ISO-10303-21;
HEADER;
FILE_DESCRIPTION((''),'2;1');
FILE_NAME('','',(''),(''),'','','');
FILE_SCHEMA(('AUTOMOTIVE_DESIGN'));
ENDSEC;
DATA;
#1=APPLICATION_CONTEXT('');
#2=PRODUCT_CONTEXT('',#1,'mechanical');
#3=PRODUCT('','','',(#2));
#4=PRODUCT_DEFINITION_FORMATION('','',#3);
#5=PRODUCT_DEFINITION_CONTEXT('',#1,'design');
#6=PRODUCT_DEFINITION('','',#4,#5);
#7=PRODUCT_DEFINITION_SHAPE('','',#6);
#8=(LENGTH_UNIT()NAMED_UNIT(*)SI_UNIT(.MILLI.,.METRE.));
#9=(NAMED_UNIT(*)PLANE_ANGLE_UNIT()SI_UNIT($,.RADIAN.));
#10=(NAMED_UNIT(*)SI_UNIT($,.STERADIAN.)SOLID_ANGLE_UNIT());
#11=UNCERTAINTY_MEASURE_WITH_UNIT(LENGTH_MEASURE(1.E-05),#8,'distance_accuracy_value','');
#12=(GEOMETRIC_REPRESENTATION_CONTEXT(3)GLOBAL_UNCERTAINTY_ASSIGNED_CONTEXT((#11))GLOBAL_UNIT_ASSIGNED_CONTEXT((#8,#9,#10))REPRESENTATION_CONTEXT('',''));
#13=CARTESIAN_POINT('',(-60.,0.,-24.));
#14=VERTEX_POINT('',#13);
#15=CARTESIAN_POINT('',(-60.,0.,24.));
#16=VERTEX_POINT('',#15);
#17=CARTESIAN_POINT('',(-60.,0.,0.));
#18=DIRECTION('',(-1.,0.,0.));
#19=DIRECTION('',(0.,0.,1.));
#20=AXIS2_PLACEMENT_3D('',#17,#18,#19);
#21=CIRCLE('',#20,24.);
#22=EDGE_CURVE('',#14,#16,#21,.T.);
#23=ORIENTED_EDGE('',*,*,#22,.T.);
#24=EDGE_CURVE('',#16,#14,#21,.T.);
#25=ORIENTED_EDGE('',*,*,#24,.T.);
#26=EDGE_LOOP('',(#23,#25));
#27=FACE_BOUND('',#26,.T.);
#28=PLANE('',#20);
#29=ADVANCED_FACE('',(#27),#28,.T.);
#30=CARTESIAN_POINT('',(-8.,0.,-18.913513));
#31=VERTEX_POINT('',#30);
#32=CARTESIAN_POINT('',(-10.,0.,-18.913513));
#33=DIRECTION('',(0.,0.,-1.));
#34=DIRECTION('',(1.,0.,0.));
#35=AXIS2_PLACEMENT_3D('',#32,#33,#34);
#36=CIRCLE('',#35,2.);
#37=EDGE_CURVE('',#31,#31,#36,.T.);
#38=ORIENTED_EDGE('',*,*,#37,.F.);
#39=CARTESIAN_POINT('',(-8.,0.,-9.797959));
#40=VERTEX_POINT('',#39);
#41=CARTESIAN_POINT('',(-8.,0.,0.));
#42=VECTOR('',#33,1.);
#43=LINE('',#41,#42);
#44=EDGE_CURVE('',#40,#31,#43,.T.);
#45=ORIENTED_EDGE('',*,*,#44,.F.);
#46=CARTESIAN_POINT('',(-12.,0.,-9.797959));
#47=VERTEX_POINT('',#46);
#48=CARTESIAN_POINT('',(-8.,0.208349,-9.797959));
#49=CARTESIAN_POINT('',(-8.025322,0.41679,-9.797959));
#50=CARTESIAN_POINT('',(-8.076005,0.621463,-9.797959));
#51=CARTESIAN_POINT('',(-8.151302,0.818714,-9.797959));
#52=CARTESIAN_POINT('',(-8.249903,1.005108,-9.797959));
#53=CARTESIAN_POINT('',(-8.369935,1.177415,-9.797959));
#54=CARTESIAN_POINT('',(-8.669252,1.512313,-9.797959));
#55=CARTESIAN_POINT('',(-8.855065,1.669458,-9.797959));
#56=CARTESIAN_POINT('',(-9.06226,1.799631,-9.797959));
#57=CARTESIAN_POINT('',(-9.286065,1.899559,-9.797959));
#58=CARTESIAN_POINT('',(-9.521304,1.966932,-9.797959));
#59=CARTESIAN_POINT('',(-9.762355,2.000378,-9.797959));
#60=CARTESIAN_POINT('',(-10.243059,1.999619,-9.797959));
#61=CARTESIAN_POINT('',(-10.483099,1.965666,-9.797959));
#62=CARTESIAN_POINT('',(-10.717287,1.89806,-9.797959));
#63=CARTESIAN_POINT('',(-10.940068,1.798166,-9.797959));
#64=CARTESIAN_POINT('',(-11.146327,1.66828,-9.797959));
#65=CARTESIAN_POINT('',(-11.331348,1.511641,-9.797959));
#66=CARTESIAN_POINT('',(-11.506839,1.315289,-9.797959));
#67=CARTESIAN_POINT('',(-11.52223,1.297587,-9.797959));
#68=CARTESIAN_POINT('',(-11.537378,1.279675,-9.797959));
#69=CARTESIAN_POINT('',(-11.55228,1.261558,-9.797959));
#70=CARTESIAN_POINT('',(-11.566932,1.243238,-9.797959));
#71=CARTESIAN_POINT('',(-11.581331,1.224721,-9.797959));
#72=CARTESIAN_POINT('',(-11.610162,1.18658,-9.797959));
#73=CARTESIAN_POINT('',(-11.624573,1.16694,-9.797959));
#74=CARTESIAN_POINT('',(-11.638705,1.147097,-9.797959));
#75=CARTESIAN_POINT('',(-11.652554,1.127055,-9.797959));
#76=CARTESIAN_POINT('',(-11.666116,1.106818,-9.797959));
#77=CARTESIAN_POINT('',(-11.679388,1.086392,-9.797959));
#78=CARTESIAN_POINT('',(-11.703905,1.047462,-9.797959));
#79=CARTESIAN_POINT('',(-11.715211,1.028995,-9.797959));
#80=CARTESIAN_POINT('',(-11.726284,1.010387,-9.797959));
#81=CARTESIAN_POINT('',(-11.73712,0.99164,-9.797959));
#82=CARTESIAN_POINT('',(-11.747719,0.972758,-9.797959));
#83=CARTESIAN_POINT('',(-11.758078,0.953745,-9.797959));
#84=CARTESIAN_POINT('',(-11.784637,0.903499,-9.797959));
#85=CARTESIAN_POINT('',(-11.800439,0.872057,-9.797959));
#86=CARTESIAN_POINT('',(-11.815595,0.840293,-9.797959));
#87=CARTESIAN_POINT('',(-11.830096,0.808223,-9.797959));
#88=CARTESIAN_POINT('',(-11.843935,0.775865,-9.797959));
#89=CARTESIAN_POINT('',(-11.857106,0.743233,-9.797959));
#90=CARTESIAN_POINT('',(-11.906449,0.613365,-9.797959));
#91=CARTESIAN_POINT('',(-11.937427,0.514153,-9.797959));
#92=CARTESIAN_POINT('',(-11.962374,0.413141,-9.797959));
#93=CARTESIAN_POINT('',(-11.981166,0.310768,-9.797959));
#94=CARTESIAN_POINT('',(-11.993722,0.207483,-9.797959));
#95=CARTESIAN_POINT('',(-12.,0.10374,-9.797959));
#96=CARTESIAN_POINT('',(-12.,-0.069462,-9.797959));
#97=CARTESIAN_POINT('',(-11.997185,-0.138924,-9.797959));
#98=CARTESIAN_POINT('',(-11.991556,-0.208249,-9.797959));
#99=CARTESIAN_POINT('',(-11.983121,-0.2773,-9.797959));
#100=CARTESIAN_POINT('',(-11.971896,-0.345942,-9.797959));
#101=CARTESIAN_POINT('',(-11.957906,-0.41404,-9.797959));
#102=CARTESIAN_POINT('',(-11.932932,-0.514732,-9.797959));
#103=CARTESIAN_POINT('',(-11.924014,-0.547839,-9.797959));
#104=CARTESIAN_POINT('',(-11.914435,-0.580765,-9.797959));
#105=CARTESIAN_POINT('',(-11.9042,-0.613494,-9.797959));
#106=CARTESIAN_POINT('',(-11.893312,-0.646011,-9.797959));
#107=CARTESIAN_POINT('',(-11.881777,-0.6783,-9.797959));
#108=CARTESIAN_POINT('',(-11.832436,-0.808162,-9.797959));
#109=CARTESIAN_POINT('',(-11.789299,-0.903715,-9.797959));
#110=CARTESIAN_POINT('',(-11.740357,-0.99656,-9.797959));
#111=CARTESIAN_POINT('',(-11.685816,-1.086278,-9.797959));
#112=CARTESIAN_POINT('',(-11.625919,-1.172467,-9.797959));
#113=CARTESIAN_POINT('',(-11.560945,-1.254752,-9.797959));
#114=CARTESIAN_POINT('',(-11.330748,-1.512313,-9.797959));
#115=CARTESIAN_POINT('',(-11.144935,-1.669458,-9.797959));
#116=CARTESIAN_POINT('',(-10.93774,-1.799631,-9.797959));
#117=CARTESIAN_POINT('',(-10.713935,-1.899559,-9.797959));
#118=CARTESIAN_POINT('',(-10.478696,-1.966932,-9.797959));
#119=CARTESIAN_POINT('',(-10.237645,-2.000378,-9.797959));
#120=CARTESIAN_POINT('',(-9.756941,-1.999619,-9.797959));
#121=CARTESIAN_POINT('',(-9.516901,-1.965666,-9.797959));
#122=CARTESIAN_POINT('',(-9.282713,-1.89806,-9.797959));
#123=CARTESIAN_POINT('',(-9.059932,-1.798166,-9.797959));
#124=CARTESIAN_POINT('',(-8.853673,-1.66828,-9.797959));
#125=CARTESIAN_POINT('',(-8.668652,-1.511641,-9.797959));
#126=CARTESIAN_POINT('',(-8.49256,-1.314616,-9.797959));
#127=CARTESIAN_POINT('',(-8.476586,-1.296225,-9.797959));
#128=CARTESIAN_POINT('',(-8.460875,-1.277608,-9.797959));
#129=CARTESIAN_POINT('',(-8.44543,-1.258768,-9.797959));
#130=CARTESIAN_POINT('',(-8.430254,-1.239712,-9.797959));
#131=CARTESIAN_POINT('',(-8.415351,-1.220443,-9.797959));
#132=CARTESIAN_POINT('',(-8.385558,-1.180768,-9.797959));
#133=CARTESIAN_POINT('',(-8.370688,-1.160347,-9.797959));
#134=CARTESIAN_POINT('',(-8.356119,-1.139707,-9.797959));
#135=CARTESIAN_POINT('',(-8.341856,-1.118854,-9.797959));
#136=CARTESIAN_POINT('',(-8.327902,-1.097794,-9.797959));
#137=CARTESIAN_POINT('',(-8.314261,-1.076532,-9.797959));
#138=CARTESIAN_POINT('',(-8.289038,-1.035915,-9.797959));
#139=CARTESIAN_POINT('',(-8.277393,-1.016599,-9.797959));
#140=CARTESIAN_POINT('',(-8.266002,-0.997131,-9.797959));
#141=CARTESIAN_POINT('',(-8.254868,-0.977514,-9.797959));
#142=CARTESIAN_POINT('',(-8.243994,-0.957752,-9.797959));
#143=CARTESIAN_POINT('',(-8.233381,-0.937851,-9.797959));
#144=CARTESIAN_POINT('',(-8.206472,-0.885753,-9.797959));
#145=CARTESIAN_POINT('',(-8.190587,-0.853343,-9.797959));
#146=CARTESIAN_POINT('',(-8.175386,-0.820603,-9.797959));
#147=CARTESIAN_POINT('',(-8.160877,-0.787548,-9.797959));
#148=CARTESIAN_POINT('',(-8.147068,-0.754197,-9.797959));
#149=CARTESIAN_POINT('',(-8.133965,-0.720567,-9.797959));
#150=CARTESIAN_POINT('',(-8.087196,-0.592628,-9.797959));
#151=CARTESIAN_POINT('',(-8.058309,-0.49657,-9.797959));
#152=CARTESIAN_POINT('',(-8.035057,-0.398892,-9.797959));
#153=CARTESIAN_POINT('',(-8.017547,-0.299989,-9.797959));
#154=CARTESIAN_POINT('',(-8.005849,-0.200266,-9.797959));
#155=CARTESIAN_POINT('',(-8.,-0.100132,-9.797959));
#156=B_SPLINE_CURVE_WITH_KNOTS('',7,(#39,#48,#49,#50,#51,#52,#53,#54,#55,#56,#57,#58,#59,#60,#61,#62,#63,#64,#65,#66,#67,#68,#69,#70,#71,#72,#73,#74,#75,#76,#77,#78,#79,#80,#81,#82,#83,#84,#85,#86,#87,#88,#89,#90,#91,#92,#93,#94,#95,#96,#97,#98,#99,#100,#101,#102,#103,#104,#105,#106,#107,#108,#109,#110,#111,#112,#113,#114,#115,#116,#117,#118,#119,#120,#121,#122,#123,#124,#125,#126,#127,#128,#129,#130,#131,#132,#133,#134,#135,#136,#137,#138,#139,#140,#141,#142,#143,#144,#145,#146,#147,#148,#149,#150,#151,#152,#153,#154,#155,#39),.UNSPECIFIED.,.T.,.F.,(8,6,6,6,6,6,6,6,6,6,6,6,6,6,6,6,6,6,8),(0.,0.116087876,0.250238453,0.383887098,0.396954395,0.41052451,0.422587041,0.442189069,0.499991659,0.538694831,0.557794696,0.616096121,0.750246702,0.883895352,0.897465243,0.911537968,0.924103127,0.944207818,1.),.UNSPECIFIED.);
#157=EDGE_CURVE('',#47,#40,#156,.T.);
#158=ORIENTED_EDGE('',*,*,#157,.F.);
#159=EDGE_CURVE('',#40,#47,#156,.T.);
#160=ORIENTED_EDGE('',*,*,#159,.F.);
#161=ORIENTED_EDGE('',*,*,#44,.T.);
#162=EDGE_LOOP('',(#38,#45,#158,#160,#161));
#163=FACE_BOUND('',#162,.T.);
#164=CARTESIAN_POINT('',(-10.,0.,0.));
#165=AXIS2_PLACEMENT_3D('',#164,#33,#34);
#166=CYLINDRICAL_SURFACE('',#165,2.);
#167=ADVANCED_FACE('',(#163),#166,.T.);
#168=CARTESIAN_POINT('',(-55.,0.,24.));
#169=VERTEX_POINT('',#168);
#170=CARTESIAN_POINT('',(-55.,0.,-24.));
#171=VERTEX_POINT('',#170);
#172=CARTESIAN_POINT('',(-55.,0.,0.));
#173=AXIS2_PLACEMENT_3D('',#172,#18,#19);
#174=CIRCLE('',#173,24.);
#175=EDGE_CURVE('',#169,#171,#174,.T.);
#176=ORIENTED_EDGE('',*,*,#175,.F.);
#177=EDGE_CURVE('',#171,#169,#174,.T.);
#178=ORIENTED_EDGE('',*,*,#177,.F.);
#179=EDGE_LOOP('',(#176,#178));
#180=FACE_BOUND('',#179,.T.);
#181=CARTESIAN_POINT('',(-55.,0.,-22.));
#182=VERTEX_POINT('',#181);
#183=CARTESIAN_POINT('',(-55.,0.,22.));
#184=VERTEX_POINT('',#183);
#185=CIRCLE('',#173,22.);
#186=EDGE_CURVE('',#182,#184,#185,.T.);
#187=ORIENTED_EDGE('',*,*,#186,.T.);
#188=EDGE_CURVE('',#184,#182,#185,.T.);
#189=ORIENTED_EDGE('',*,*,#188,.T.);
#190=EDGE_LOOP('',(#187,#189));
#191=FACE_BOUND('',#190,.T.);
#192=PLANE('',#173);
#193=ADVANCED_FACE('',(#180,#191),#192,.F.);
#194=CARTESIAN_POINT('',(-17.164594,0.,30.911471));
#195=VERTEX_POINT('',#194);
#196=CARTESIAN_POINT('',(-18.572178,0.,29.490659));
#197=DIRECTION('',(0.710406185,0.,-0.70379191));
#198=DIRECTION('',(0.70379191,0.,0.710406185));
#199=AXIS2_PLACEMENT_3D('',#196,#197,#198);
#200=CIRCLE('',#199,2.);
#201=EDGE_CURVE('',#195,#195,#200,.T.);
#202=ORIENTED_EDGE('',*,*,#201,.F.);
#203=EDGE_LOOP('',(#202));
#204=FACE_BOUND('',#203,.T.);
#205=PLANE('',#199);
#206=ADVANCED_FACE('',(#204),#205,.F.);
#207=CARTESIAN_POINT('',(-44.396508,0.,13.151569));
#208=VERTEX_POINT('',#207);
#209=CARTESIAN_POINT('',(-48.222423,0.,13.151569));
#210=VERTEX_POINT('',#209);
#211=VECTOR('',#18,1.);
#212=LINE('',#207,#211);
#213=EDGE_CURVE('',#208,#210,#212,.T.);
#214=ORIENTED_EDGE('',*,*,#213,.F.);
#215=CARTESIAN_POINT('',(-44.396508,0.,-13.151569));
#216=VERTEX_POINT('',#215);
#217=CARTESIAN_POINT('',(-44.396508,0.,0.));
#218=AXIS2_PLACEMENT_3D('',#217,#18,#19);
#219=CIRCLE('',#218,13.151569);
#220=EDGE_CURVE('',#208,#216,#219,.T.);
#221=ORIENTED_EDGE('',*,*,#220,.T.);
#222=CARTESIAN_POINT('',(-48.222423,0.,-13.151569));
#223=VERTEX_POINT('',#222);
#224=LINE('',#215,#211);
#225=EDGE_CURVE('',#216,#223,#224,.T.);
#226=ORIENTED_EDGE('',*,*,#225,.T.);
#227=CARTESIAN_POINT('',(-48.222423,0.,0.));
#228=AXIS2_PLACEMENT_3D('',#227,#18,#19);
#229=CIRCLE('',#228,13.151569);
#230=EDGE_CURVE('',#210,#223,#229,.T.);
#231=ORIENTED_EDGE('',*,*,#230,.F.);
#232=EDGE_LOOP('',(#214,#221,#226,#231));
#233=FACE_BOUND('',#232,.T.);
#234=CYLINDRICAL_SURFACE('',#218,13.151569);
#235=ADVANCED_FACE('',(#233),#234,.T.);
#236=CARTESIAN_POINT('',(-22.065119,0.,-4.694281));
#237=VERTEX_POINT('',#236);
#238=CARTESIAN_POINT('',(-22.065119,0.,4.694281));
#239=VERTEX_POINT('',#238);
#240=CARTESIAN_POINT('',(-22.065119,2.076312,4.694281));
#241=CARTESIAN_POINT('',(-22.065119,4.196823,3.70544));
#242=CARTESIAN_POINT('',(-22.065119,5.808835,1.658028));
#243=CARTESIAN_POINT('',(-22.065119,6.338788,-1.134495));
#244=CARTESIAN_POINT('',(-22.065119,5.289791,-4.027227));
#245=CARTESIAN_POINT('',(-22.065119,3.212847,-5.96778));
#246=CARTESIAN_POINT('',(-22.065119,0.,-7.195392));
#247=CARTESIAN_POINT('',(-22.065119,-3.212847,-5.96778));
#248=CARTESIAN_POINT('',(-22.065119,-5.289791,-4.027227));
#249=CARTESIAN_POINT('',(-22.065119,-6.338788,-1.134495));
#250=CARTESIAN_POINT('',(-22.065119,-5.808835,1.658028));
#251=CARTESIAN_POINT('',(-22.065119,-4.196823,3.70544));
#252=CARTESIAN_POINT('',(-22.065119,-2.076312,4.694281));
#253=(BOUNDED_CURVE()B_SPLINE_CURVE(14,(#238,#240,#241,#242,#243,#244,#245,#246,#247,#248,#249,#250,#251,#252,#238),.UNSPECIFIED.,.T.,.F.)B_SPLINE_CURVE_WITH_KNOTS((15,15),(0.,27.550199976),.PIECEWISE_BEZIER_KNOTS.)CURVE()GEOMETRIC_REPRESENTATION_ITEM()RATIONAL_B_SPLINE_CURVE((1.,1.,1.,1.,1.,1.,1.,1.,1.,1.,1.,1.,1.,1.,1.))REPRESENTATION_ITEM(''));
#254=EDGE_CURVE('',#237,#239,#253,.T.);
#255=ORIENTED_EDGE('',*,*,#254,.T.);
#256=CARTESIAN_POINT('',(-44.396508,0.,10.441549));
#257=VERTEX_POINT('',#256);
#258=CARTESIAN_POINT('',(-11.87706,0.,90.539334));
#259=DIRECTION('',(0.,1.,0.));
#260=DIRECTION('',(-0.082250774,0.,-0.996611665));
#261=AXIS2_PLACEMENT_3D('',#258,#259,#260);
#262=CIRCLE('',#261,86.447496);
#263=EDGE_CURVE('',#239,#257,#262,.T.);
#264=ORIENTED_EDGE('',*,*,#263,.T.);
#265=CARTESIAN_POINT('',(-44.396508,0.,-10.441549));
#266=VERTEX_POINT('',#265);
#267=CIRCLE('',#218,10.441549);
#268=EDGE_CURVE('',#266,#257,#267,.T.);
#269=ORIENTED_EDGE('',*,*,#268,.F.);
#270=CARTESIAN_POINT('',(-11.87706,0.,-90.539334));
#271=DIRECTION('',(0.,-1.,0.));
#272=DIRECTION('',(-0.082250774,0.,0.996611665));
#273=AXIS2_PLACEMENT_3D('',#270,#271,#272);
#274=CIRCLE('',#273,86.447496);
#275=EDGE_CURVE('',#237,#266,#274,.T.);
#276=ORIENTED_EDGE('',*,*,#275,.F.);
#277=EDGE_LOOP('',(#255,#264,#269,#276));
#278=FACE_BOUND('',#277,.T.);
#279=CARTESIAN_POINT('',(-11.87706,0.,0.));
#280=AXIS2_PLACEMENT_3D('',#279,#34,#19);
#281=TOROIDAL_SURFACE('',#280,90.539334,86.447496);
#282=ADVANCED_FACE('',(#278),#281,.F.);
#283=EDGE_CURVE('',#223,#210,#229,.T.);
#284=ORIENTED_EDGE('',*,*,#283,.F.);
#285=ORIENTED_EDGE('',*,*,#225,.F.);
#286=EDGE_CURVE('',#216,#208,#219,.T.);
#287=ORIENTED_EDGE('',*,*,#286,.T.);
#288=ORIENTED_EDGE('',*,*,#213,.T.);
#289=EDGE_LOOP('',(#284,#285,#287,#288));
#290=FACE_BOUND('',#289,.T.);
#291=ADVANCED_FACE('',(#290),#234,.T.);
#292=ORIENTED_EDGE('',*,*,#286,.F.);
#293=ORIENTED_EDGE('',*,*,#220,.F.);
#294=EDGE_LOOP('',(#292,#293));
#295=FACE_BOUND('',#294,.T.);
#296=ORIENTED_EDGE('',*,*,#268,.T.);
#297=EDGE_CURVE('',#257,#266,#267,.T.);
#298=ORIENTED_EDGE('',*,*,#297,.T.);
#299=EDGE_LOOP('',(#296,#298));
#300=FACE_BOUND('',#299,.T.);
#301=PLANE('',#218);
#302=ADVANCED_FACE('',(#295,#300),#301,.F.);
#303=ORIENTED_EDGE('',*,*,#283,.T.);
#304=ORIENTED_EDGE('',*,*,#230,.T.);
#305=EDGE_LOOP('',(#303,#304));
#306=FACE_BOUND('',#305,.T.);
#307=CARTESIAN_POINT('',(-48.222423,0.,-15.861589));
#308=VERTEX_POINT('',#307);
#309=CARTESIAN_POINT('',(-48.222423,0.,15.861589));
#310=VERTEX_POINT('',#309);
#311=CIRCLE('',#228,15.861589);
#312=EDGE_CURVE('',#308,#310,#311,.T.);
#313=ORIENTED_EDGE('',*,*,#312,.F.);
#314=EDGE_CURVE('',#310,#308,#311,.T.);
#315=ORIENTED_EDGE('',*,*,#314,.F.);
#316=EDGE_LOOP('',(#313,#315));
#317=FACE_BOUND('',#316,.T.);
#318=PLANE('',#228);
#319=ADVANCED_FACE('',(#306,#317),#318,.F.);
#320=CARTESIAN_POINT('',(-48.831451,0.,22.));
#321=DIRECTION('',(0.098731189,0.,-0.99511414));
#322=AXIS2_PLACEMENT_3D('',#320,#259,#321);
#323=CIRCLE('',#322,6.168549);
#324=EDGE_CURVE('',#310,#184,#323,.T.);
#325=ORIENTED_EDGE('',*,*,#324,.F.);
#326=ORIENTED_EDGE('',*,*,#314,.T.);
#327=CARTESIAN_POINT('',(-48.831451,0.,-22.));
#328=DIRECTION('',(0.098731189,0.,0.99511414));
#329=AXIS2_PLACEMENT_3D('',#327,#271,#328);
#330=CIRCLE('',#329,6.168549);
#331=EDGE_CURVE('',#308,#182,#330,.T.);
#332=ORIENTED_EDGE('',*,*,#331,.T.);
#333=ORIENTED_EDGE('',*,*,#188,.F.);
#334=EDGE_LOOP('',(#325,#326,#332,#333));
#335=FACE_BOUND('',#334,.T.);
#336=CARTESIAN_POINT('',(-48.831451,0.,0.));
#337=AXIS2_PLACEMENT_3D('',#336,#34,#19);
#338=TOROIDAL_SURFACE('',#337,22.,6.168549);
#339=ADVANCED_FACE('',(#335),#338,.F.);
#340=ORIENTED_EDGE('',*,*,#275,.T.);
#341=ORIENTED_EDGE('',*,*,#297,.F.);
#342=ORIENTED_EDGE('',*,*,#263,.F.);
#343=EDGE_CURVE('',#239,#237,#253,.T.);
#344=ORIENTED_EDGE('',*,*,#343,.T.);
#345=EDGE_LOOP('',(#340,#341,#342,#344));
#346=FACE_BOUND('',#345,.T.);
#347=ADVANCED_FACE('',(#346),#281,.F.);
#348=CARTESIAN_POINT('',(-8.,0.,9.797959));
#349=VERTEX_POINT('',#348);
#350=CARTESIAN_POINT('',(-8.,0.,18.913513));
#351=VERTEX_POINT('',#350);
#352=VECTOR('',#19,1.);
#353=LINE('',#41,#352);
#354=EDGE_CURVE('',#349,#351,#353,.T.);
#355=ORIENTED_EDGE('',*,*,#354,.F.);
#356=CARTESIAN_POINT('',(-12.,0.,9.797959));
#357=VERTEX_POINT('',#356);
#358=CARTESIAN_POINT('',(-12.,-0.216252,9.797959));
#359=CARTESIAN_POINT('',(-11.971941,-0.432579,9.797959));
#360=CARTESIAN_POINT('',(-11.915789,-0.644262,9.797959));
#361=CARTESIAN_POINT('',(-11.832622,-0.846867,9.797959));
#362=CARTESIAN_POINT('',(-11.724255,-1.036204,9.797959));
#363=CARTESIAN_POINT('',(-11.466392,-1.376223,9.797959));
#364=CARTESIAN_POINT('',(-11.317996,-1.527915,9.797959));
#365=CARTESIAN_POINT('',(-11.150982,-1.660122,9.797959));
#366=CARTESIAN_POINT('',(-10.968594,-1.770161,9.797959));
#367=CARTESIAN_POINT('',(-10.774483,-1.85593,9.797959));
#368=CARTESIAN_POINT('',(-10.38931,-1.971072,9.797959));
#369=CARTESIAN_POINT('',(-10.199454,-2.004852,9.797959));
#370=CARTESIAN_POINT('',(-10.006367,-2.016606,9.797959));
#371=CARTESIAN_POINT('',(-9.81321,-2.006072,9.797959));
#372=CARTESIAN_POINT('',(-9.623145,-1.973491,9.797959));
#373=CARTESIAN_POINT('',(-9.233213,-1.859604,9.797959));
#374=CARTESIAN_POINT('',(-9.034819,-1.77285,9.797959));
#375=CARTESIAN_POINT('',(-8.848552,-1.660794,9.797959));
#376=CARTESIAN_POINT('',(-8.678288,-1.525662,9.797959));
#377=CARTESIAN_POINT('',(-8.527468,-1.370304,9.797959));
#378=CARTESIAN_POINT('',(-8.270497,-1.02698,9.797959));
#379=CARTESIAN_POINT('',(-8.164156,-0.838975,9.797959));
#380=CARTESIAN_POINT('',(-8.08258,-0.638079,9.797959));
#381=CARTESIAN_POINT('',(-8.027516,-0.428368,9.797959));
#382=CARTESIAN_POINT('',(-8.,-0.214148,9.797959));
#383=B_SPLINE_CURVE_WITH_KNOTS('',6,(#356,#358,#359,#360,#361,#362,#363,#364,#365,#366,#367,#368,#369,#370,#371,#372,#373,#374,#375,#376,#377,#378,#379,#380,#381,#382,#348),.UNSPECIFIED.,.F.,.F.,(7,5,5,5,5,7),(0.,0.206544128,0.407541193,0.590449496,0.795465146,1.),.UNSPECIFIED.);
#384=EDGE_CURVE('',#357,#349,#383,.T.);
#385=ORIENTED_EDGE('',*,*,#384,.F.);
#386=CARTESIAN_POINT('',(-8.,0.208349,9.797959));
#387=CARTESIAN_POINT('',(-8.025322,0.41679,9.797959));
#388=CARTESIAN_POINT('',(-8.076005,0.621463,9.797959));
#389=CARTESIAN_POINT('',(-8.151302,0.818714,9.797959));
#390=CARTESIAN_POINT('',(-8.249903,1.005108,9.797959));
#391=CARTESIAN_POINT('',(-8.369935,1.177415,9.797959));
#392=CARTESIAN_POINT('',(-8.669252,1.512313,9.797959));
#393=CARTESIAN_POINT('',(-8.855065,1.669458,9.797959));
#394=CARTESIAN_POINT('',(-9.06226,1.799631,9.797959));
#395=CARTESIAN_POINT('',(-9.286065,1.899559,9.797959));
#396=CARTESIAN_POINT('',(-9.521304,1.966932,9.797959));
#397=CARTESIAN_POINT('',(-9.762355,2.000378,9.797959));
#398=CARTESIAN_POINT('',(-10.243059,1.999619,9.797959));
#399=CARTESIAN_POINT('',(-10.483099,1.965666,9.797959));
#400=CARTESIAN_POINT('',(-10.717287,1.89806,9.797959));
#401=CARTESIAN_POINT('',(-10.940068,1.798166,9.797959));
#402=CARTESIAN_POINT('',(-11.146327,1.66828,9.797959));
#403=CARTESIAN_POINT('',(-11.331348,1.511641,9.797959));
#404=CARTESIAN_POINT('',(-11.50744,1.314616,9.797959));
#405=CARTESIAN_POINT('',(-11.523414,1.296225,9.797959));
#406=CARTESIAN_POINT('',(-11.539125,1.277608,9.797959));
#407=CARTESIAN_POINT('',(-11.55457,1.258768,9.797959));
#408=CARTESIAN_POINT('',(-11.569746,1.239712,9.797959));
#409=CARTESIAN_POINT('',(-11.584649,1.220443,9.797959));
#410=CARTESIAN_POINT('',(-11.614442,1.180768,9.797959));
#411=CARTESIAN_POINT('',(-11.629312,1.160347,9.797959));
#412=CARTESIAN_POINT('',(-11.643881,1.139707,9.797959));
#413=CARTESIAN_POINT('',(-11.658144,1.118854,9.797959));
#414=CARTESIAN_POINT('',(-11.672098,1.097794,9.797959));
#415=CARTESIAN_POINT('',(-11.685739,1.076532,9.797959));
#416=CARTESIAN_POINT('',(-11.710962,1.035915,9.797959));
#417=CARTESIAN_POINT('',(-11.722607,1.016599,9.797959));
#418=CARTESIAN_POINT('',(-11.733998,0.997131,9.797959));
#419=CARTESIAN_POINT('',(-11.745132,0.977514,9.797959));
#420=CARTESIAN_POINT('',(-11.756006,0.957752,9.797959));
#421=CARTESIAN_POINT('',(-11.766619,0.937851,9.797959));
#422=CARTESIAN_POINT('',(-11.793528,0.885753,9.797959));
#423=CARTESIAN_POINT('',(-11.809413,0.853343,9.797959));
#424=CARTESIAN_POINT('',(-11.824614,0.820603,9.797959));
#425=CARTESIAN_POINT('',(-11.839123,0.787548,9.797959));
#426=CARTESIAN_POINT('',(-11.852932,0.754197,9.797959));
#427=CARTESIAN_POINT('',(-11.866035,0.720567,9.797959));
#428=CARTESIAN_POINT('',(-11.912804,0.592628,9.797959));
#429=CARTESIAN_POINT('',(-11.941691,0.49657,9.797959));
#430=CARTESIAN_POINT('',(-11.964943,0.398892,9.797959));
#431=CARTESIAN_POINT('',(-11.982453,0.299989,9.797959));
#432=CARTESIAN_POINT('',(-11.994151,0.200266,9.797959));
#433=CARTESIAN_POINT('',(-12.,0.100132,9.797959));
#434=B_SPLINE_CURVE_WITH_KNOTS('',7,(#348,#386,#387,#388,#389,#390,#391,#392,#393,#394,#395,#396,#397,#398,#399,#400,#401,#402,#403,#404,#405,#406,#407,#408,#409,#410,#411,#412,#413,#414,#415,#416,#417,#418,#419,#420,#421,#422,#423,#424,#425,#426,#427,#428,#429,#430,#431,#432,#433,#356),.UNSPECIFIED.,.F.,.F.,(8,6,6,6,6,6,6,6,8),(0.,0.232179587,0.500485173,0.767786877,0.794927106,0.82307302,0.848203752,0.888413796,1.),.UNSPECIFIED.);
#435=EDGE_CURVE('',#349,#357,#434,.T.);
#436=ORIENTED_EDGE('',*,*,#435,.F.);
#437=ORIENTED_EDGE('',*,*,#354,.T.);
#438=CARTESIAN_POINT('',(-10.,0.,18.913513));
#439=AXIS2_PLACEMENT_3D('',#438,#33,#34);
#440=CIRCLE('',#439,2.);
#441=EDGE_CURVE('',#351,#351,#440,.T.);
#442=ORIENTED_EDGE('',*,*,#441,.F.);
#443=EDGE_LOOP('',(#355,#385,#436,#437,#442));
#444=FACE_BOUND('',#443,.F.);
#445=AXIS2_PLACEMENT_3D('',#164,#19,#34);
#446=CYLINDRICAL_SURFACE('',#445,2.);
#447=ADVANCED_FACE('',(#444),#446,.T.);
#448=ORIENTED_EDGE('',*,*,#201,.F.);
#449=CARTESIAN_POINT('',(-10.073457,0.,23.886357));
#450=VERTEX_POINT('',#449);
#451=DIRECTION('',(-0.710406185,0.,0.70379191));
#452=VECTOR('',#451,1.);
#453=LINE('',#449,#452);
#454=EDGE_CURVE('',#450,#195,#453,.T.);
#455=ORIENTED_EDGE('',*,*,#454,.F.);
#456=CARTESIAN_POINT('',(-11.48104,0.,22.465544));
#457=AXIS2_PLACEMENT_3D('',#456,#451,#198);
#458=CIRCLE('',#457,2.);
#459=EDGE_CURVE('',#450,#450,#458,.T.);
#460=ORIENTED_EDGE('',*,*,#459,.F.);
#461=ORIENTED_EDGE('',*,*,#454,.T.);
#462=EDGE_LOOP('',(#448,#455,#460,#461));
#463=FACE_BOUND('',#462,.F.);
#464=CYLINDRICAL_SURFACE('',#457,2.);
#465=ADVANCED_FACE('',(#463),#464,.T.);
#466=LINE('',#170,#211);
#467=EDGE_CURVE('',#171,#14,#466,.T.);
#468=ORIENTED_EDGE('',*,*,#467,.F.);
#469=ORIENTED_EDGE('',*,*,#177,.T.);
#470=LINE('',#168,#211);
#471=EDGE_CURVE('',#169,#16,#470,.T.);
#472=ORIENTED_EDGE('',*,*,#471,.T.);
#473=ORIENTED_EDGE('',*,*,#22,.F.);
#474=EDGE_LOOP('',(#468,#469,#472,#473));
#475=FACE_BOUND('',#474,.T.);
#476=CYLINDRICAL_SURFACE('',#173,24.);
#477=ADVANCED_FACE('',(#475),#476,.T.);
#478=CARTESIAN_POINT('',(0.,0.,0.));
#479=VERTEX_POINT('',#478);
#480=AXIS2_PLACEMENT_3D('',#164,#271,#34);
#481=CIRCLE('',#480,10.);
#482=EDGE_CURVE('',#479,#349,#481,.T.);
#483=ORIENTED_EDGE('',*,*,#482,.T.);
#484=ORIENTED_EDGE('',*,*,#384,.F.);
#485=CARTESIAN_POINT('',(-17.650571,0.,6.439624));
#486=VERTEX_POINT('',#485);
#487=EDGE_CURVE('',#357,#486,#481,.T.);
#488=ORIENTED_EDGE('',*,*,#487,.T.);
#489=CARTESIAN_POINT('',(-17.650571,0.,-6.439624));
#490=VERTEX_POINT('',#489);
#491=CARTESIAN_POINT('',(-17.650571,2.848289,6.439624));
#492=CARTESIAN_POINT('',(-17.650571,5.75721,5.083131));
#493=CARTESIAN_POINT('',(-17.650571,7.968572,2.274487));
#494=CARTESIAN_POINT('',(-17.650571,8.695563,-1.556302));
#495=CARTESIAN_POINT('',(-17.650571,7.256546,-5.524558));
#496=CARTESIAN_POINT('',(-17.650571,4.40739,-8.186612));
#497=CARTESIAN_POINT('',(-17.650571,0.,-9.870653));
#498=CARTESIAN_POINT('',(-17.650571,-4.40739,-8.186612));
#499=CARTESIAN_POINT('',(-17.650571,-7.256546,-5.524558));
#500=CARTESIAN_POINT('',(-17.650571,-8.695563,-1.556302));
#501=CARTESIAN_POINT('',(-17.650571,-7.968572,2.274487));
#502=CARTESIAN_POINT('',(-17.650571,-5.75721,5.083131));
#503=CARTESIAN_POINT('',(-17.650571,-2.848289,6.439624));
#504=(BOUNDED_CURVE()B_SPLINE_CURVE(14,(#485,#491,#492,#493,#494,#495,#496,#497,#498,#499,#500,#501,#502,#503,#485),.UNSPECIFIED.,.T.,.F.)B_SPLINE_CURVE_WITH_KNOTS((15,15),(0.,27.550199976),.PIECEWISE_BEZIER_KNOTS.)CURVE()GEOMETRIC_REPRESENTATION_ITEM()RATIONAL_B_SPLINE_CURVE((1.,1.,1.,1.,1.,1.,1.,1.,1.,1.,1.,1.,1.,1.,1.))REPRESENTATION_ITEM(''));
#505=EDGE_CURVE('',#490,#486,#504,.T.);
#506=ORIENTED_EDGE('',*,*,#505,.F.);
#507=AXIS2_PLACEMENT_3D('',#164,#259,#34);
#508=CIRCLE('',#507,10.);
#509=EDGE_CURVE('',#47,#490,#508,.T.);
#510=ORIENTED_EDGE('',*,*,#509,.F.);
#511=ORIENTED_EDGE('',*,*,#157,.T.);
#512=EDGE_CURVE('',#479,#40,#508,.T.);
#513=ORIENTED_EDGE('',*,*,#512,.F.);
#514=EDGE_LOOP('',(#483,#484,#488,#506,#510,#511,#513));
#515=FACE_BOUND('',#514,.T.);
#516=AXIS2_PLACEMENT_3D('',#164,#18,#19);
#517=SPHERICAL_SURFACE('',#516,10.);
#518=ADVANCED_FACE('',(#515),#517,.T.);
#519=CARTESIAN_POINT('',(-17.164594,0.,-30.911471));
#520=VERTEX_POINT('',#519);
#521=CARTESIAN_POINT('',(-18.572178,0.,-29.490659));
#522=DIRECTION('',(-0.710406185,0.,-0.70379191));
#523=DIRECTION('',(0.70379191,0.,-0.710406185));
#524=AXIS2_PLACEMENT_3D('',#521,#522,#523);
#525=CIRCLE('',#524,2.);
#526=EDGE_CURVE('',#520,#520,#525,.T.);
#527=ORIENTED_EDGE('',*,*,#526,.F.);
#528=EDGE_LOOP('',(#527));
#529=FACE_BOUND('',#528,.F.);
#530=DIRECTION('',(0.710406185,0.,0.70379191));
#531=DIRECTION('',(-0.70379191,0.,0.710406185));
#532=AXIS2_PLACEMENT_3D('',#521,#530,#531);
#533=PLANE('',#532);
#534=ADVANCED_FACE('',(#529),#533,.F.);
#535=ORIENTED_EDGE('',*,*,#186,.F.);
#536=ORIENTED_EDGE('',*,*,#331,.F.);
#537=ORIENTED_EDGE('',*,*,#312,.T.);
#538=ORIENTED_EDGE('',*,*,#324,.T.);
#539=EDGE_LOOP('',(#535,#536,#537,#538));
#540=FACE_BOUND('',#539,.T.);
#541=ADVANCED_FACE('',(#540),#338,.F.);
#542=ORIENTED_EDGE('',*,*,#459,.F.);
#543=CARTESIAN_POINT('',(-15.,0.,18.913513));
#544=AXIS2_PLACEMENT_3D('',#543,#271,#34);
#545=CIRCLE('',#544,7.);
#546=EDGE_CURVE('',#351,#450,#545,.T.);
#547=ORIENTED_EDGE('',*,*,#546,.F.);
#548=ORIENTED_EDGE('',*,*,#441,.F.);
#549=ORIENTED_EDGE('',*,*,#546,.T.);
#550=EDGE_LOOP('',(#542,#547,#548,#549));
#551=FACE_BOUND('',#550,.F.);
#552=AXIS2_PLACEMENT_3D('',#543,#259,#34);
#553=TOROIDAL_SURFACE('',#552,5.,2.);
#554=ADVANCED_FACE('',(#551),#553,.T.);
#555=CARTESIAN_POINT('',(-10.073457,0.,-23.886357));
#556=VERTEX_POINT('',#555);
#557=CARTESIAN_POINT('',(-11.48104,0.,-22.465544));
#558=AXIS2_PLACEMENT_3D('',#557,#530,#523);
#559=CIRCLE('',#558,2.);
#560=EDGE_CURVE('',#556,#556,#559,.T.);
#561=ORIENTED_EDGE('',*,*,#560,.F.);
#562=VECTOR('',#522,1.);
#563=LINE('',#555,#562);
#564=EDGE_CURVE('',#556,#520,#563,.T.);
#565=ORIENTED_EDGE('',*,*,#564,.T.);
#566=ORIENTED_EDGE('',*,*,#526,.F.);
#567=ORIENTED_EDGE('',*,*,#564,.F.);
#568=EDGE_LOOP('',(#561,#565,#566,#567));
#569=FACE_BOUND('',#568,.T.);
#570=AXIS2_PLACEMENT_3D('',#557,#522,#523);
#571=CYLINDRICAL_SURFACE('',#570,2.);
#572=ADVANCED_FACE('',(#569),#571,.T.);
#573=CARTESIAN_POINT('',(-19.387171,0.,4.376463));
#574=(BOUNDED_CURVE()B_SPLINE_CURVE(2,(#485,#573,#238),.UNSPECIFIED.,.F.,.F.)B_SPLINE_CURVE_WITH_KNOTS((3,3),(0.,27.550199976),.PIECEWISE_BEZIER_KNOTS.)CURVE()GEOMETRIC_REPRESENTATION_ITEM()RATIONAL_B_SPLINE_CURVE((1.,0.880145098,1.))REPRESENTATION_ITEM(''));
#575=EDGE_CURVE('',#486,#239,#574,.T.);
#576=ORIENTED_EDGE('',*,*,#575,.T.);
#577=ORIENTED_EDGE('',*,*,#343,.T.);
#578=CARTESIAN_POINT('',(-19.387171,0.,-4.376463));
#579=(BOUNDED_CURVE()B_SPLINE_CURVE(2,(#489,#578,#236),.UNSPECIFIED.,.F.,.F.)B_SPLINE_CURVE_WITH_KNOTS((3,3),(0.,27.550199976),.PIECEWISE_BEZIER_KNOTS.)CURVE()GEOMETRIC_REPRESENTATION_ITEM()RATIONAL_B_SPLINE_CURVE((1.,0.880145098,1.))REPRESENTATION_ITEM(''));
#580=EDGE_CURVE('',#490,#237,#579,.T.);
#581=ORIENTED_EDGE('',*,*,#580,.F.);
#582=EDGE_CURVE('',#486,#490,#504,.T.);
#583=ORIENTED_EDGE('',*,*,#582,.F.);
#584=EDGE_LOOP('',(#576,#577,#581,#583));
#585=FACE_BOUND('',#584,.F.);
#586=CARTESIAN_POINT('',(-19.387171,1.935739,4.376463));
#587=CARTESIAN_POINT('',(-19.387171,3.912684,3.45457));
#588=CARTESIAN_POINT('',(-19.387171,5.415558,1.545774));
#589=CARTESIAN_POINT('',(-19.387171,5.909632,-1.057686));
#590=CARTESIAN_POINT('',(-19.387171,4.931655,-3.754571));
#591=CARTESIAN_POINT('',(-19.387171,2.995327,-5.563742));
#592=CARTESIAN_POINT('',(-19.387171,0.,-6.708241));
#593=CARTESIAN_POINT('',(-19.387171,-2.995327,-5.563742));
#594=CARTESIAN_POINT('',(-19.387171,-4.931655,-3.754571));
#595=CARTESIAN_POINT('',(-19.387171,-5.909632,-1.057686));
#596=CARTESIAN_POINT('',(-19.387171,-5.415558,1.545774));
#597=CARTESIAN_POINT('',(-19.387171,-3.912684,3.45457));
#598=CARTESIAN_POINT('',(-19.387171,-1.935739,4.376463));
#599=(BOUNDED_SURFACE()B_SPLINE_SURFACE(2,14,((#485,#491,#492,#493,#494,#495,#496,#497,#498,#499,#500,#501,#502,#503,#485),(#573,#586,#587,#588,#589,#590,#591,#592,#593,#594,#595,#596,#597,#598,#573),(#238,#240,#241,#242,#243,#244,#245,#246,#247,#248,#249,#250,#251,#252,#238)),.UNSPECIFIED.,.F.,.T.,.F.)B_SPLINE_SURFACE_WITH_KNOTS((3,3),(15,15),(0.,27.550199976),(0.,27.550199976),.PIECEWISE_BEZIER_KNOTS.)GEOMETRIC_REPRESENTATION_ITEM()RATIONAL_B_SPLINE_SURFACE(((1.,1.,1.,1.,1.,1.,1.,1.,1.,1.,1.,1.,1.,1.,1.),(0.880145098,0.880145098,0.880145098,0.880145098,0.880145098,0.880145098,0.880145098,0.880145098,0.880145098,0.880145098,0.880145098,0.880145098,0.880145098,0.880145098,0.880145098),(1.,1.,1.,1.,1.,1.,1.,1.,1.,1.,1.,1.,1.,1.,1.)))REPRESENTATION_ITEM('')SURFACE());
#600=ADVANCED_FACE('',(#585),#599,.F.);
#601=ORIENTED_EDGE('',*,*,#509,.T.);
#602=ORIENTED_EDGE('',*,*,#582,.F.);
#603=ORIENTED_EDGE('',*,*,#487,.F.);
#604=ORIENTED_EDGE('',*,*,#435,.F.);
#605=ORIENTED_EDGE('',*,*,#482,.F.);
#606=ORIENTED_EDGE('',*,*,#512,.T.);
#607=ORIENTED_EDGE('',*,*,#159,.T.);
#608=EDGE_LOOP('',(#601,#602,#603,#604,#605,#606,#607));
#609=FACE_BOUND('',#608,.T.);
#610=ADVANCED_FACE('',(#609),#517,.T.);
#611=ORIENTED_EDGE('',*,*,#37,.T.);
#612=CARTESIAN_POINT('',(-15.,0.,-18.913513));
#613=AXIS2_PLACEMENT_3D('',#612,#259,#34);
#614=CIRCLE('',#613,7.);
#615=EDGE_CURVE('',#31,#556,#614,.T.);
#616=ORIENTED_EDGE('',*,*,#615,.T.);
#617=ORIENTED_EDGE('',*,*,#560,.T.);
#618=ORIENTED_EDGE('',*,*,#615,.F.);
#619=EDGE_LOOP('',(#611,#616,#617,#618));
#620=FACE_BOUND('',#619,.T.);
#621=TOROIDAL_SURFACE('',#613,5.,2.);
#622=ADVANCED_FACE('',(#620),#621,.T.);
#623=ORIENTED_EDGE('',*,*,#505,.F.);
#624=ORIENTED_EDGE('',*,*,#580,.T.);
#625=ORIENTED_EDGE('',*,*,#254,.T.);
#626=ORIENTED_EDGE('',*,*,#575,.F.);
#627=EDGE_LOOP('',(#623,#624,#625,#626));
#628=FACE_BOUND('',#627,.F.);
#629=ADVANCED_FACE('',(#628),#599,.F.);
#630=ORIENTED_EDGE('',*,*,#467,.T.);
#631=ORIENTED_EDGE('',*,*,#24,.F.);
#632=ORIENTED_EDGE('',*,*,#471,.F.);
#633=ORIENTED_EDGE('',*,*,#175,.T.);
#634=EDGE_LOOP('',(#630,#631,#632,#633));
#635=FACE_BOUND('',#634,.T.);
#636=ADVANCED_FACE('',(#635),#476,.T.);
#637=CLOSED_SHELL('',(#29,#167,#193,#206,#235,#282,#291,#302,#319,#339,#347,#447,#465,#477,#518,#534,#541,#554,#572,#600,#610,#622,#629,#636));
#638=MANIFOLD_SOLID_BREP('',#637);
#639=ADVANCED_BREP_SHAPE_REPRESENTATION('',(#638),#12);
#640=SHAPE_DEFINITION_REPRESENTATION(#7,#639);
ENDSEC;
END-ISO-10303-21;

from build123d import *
from build123d import SkipClean  # not in build123d's __all__

# Parameters (mm, degrees)
F2_R          = 5
F3_R          = 2
F4_DEPTH      = 25
F4_DEPTH_BACK = 25
F6_R          = 2


with BuildPart() as f1:
    # F0 (on Front) → F1 (revolve)
    with BuildSketch(Plane.XZ):
        with BuildLine():
            Line((-60, 0), (0, 0))
            ThreePointArc((0, 0), (-7.7499262393, 9.7435706018), (-18.9874336143, 4.3847505093))
            ThreePointArc((-18.9874336143, 4.3847505093), (-31.9220569404, 6.4479089357), (-44.3965084851, 10.4415491223))
            Line((-44.3965084851, 10.4415491223), (-44.3965084851, 13.1515692919))
            Line((-44.3965084851, 13.1515692919), (-48.2224225998, 13.1515692919))
            Line((-48.2224225998, 13.1515692919), (-48.2224225998, 15.8615894616))
            ThreePointArc((-48.2224225998, 15.8615894616), (-52.9723552194, 17.427920622), (-55, 22))
            Line((-55, 22), (-55, 24))
            Line((-55, 24), (-60, 24))
            Line((-60, 24), (-60, 0))
        make_face()
    revolve(axis=Axis((-30, 0, 0), (-1, 0, 0)))

    # F2
    f2_edges = [f1.edges().sort_by_distance(p)[0] for p in [
        (-18.987434, 0, -4.384751),
    ]]
    fillet(f2_edges, radius=F2_R)

    # F3 (on Top) → F4 (cut, two sides)
    with BuildSketch(Plane.XY) as f4_sk:
        with Locations((-10, 0)):
            Circle(F3_R)
    extrude(amount=-F4_DEPTH, mode=Mode.SUBTRACT)
    extrude(f4_sk.sketch, amount=F4_DEPTH_BACK, mode=Mode.SUBTRACT)

    # F7: sweep along a path in F5
    with BuildLine(Plane.XZ) as f7_path:
        Line((-10, 0), (-10, -18.9135132155))
        ThreePointArc((-10, -18.9135132155), (-10.3850895053, -20.8377276333), (-11.4810404502, -22.4655441398))
        Line((-11.4810404502, -22.4655441398), (-18.572177738, -29.4906590134))
    # F6 (on Top) → F7 (sweep)
    with BuildSketch(Plane.XY):
        with Locations((-10, 0)):
            Circle(F6_R)
    sweep(path=f7_path.line)

    # F8: F1 across plane


with BuildPart() as f1_1:
    add(f1.part, clean=False)
    with SkipClean():  # cleaning this boolean's faces spoils the solid; the shape is the same uncleaned
        add(f1.part.mirror(Plane.XY), clean=False)


solid = f1_1.part
